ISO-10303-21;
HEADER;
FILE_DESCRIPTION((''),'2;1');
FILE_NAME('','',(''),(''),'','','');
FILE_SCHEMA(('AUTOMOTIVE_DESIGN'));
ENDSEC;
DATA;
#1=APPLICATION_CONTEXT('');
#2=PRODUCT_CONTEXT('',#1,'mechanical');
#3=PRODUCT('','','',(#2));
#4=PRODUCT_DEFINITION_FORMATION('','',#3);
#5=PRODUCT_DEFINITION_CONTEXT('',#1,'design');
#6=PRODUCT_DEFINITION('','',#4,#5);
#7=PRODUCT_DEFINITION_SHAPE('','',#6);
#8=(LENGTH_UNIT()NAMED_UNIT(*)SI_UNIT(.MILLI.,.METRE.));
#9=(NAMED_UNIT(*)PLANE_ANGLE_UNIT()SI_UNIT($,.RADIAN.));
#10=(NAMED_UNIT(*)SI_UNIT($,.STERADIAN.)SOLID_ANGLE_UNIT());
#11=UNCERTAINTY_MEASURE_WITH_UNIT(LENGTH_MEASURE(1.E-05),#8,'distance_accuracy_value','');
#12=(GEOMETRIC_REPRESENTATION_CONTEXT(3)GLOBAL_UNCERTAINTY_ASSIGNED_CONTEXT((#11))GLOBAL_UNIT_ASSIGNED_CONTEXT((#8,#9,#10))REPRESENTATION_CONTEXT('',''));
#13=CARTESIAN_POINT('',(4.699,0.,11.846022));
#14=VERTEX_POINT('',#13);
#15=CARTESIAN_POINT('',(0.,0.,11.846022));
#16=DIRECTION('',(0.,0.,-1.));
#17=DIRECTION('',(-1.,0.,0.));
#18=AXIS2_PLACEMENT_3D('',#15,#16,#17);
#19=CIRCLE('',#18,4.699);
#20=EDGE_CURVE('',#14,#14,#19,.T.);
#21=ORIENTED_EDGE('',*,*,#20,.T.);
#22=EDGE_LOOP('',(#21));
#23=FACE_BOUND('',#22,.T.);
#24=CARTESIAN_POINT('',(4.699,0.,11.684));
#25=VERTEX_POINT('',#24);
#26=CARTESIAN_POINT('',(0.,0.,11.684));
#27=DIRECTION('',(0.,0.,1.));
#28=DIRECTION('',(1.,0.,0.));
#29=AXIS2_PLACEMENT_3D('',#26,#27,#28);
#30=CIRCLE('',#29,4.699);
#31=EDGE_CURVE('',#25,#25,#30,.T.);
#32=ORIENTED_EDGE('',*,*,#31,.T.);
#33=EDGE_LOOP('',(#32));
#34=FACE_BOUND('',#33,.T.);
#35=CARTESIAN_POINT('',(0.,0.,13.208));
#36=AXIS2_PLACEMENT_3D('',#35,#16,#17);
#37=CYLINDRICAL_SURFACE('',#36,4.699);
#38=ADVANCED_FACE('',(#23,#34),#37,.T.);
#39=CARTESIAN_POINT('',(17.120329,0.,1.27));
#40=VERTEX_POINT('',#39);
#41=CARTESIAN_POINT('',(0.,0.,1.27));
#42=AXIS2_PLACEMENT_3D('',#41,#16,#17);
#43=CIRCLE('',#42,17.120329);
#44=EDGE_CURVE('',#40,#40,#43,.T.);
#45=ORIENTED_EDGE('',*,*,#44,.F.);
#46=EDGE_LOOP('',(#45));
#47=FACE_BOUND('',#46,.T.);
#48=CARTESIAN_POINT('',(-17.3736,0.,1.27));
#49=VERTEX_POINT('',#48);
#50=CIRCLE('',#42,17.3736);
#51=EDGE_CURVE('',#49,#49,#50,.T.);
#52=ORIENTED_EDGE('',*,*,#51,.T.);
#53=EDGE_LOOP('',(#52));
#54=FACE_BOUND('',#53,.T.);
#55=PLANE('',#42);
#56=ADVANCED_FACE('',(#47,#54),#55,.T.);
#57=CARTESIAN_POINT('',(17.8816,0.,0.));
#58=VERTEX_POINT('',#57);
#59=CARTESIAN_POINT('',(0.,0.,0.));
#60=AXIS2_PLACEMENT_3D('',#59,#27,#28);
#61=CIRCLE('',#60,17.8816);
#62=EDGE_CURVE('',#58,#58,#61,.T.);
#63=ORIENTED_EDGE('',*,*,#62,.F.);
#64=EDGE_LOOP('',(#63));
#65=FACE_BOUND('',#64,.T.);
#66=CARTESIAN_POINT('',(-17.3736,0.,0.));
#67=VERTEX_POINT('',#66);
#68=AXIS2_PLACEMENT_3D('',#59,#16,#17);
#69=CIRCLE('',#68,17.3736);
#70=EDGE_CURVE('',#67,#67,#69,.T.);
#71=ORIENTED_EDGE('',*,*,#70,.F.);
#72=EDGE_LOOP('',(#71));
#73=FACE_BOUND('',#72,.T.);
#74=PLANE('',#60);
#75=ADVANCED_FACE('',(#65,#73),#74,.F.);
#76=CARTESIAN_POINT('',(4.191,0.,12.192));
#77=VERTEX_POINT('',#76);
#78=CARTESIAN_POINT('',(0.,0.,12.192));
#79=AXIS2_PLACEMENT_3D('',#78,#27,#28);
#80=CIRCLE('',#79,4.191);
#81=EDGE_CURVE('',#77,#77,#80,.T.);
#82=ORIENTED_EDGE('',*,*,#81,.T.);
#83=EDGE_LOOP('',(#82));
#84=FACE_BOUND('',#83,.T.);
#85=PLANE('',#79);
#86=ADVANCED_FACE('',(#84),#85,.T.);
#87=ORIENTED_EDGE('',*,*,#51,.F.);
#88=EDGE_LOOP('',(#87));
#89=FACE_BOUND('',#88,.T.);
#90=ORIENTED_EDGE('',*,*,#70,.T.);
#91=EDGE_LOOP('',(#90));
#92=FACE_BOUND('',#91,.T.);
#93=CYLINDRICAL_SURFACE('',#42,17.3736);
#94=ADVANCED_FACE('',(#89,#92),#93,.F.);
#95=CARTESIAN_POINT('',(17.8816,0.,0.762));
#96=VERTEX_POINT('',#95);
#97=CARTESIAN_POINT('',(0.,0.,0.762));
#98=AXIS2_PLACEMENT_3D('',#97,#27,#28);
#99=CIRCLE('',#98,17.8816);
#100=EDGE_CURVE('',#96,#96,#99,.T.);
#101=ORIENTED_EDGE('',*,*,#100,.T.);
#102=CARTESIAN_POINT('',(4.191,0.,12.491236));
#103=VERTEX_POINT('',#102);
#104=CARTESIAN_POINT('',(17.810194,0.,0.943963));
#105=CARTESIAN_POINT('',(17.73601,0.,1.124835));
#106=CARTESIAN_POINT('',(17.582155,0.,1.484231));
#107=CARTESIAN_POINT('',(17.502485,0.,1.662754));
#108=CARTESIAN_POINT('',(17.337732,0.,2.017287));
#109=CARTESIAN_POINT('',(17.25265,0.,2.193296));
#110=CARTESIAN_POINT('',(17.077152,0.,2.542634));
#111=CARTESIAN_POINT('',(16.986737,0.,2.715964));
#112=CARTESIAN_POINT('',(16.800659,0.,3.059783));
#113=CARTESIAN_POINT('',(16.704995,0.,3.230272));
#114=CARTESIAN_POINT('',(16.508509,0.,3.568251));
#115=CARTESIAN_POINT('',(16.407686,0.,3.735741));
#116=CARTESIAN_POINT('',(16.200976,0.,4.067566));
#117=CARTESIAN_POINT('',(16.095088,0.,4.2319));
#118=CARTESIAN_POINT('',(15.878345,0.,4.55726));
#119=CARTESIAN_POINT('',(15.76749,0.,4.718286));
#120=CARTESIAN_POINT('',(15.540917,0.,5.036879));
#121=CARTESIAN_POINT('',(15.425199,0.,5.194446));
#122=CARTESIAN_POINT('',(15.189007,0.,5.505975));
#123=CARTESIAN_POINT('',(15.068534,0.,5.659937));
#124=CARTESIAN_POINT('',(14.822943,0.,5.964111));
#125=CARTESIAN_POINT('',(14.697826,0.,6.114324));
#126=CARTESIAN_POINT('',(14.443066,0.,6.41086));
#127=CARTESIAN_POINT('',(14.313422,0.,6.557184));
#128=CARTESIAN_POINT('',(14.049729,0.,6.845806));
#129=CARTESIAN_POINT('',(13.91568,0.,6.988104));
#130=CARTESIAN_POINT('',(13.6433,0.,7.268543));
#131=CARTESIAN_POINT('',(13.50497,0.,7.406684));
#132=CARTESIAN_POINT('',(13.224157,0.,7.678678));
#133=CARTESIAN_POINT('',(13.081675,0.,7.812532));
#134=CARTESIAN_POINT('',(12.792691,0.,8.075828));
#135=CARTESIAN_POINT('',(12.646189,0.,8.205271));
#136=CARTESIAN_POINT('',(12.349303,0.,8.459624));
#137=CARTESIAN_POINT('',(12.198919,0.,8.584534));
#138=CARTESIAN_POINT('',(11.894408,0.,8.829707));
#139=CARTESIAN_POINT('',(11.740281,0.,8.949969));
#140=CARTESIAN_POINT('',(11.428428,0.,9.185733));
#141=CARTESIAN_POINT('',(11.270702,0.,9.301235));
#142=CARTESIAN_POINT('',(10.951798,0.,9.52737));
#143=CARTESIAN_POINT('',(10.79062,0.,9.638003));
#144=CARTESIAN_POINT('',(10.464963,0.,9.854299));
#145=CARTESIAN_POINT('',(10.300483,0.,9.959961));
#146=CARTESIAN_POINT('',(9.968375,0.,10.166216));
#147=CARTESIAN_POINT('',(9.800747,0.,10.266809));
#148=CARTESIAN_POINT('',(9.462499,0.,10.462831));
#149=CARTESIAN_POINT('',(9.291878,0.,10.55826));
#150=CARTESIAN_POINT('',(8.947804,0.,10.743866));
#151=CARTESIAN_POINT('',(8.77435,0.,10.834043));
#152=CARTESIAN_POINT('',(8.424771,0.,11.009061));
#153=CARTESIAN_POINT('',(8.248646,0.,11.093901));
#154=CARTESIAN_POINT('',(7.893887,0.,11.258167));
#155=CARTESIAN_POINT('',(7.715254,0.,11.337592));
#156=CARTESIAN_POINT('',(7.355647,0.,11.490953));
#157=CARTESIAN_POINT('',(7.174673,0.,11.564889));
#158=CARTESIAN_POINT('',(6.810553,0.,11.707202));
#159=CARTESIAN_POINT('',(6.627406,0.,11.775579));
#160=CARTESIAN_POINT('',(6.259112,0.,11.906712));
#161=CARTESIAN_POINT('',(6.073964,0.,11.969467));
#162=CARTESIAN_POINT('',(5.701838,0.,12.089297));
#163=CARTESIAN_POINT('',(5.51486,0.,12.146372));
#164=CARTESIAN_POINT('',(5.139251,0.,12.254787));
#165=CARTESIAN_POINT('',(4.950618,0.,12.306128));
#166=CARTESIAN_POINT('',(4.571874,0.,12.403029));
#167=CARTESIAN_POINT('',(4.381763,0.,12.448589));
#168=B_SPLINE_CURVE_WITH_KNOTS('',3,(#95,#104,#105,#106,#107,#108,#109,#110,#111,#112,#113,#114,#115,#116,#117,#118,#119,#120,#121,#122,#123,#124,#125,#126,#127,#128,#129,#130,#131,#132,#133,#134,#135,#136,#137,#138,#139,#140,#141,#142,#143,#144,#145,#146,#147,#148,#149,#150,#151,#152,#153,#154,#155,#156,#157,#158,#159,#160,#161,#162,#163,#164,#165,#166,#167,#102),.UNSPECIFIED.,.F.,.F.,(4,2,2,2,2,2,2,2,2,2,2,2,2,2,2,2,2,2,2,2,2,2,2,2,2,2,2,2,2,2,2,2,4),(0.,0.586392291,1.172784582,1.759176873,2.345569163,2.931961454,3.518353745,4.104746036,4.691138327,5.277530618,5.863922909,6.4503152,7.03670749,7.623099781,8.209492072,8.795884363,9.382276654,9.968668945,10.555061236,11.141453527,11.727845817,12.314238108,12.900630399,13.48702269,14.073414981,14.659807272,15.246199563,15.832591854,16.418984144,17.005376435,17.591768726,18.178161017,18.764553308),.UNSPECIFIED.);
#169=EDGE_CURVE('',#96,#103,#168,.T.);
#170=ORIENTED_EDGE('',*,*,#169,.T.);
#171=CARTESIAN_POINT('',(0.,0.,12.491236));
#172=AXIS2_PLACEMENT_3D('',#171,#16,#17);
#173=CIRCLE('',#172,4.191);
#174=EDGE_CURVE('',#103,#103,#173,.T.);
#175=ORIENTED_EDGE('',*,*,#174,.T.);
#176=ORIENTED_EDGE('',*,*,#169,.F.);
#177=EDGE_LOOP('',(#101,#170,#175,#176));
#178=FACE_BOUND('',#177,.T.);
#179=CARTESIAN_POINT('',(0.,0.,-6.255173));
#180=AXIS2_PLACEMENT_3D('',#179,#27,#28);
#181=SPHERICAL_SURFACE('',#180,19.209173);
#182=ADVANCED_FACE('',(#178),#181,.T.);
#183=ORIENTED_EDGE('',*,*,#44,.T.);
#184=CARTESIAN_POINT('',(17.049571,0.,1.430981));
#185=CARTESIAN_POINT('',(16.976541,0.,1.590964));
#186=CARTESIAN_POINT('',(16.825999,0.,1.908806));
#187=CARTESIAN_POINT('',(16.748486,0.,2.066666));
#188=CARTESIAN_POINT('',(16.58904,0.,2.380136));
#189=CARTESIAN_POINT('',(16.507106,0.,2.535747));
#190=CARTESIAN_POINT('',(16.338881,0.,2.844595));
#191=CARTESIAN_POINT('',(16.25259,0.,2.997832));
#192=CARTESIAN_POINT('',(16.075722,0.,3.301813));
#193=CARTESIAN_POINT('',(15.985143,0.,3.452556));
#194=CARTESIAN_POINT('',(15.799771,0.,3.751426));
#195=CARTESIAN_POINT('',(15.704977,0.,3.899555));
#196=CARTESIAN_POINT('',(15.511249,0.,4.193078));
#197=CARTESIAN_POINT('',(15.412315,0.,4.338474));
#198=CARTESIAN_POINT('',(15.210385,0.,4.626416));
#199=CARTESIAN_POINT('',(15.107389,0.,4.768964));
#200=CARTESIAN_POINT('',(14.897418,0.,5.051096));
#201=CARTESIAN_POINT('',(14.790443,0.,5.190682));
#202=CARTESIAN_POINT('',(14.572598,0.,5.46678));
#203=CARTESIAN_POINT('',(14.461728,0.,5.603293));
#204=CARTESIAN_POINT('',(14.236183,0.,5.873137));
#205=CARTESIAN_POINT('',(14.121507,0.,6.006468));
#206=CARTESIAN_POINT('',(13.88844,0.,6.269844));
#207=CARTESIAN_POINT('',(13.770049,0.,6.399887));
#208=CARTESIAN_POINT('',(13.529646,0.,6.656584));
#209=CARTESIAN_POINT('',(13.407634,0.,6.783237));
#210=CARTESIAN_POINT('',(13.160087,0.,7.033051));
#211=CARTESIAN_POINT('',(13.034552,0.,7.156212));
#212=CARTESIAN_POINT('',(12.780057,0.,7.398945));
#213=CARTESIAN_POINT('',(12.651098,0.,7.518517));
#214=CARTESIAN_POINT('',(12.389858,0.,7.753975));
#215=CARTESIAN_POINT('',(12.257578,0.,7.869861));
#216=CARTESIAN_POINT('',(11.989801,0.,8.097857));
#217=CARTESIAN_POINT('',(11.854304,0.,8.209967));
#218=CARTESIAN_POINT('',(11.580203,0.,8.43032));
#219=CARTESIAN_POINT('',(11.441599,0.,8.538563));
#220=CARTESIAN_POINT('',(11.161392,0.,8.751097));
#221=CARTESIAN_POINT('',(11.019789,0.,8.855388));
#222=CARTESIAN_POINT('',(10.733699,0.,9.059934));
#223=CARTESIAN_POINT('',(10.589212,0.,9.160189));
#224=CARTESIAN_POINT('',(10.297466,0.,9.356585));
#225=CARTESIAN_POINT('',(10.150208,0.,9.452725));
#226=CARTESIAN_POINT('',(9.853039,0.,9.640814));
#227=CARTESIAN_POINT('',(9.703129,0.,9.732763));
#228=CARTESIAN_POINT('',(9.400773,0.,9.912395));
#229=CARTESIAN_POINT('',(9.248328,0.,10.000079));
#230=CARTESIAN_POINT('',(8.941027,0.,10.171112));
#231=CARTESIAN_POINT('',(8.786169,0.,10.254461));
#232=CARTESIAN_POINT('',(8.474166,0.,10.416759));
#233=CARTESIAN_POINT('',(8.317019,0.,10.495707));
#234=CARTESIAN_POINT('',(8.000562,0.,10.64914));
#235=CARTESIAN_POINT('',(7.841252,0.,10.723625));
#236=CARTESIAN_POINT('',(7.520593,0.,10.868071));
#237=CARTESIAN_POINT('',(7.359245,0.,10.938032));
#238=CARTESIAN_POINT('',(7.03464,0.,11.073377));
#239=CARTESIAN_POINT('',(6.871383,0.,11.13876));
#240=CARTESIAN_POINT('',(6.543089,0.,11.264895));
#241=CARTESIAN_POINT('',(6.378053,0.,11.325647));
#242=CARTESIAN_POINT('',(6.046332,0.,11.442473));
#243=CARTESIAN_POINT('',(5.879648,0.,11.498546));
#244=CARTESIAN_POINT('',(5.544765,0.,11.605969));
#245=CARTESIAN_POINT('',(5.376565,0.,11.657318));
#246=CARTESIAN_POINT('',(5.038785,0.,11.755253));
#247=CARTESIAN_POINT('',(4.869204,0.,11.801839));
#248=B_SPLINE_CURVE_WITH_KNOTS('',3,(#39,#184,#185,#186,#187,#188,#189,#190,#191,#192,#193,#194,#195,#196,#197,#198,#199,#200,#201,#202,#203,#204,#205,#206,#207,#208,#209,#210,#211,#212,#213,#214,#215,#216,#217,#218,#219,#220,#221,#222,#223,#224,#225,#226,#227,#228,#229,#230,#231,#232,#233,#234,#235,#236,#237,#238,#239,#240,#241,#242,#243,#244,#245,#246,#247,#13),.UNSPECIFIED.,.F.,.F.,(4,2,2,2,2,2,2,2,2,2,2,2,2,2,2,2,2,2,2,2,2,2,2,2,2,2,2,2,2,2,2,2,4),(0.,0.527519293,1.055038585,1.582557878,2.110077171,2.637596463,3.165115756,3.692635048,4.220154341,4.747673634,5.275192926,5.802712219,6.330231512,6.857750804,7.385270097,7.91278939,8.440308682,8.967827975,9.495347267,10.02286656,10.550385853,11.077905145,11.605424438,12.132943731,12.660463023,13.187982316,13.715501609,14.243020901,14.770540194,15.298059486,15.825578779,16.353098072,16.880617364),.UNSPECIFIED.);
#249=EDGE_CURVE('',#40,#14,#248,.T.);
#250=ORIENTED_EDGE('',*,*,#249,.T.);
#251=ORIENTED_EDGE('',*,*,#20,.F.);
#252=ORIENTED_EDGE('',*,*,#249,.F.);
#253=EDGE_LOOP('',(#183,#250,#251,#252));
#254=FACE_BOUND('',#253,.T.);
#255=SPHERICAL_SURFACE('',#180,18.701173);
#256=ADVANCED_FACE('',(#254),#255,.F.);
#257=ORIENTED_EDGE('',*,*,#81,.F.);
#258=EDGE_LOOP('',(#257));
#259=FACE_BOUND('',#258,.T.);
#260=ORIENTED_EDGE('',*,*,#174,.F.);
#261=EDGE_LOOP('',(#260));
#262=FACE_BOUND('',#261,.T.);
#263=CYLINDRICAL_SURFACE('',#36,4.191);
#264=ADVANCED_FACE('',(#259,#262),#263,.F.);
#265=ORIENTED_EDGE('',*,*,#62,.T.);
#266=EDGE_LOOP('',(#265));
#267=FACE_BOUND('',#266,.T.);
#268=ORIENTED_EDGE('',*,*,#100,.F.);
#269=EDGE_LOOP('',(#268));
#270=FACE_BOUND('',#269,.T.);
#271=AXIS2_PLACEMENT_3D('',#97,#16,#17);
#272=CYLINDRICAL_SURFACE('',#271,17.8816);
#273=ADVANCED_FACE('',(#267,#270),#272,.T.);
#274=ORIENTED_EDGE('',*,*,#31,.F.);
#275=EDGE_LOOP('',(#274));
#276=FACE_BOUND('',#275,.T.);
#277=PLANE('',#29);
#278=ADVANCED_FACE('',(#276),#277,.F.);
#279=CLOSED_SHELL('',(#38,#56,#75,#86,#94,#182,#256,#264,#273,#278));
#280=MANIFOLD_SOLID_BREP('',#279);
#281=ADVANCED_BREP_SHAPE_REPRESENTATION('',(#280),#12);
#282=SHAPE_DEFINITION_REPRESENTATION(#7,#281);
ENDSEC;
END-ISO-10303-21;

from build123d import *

# Parameters (mm, degrees)
SKETCH3_R           = 17.8816
BOSS_EXTRUDE2_DEPTH = 0.762
DOME1_FACE_RADIUS   = 17.8816
DOME1_HEIGHT        = 12.192
SKETCH4_R           = 4.191
CUT_EXTRUDE1_DEPTH  = 1.016
SKETCH5_R           = 17.3736
CUT_EXTRUDE2_DEPTH  = 1.27


# Read off the part's stored shape, not the designer's step: Shell3
with BuildPart() as part:
    # Sketch3 → Boss-Extrude2 (new body)
    with BuildSketch(Plane.XY):
        with Locations(Location((0, 0, 0), (0, 0, 180))):
            Circle(SKETCH3_R)
    extrude(amount=BOSS_EXTRUDE2_DEPTH)

    # Dome1: a dome of height H over a round flat face of radius A is a cap of a sphere of radius (A * A + H * H) / (2 * H)
    dome1_r = (DOME1_FACE_RADIUS * DOME1_FACE_RADIUS + DOME1_HEIGHT * DOME1_HEIGHT) / (2 * DOME1_HEIGHT)
    dome1_base = Plane((0, 0, 0.762), z_dir=(0, 0, 1))
    with Locations(dome1_base.offset(DOME1_HEIGHT - dome1_r)):
        dome1_ball = Sphere(dome1_r, mode=Mode.PRIVATE)
    add(split(dome1_ball, bisect_by=dome1_base, keep=Keep.TOP, mode=Mode.PRIVATE))

    # Sketch4 → Cut-Extrude1 (cut)
    with BuildSketch(Plane.XY.offset(12.192)):
        Circle(SKETCH4_R)
    extrude(amount=CUT_EXTRUDE1_DEPTH, mode=Mode.SUBTRACT)

    # Sketch5 → Cut-Extrude2 (cut)
    with BuildSketch(Plane(origin=(0, 0, 0), x_dir=(-1, 0, 0), z_dir=(0, 0, -1))):
        Circle(SKETCH5_R)
    extrude(amount=-CUT_EXTRUDE2_DEPTH, mode=Mode.SUBTRACT)

    # Shell3 outline → Shell3 (revolve, cut)
    with BuildSketch(Plane.XZ):
        with BuildLine():
            ThreePointArc((17.120328578, 1.269999983), (12.123689074, 7.983859192), (4.698999991, 11.846022294))
            Line((4.698999991, 11.846022294), (4.699, 11.684))
            Line((4.699, 11.684), (0, 11.684))
            Line((0, 11.684), (0, 1.269999983))
            Line((0, 1.269999983), (17.120328578, 1.269999983))
        make_face()
    revolve(axis=Axis((0, 0, 0), (0, 0, 1)), mode=Mode.SUBTRACT)


solid = part.part
